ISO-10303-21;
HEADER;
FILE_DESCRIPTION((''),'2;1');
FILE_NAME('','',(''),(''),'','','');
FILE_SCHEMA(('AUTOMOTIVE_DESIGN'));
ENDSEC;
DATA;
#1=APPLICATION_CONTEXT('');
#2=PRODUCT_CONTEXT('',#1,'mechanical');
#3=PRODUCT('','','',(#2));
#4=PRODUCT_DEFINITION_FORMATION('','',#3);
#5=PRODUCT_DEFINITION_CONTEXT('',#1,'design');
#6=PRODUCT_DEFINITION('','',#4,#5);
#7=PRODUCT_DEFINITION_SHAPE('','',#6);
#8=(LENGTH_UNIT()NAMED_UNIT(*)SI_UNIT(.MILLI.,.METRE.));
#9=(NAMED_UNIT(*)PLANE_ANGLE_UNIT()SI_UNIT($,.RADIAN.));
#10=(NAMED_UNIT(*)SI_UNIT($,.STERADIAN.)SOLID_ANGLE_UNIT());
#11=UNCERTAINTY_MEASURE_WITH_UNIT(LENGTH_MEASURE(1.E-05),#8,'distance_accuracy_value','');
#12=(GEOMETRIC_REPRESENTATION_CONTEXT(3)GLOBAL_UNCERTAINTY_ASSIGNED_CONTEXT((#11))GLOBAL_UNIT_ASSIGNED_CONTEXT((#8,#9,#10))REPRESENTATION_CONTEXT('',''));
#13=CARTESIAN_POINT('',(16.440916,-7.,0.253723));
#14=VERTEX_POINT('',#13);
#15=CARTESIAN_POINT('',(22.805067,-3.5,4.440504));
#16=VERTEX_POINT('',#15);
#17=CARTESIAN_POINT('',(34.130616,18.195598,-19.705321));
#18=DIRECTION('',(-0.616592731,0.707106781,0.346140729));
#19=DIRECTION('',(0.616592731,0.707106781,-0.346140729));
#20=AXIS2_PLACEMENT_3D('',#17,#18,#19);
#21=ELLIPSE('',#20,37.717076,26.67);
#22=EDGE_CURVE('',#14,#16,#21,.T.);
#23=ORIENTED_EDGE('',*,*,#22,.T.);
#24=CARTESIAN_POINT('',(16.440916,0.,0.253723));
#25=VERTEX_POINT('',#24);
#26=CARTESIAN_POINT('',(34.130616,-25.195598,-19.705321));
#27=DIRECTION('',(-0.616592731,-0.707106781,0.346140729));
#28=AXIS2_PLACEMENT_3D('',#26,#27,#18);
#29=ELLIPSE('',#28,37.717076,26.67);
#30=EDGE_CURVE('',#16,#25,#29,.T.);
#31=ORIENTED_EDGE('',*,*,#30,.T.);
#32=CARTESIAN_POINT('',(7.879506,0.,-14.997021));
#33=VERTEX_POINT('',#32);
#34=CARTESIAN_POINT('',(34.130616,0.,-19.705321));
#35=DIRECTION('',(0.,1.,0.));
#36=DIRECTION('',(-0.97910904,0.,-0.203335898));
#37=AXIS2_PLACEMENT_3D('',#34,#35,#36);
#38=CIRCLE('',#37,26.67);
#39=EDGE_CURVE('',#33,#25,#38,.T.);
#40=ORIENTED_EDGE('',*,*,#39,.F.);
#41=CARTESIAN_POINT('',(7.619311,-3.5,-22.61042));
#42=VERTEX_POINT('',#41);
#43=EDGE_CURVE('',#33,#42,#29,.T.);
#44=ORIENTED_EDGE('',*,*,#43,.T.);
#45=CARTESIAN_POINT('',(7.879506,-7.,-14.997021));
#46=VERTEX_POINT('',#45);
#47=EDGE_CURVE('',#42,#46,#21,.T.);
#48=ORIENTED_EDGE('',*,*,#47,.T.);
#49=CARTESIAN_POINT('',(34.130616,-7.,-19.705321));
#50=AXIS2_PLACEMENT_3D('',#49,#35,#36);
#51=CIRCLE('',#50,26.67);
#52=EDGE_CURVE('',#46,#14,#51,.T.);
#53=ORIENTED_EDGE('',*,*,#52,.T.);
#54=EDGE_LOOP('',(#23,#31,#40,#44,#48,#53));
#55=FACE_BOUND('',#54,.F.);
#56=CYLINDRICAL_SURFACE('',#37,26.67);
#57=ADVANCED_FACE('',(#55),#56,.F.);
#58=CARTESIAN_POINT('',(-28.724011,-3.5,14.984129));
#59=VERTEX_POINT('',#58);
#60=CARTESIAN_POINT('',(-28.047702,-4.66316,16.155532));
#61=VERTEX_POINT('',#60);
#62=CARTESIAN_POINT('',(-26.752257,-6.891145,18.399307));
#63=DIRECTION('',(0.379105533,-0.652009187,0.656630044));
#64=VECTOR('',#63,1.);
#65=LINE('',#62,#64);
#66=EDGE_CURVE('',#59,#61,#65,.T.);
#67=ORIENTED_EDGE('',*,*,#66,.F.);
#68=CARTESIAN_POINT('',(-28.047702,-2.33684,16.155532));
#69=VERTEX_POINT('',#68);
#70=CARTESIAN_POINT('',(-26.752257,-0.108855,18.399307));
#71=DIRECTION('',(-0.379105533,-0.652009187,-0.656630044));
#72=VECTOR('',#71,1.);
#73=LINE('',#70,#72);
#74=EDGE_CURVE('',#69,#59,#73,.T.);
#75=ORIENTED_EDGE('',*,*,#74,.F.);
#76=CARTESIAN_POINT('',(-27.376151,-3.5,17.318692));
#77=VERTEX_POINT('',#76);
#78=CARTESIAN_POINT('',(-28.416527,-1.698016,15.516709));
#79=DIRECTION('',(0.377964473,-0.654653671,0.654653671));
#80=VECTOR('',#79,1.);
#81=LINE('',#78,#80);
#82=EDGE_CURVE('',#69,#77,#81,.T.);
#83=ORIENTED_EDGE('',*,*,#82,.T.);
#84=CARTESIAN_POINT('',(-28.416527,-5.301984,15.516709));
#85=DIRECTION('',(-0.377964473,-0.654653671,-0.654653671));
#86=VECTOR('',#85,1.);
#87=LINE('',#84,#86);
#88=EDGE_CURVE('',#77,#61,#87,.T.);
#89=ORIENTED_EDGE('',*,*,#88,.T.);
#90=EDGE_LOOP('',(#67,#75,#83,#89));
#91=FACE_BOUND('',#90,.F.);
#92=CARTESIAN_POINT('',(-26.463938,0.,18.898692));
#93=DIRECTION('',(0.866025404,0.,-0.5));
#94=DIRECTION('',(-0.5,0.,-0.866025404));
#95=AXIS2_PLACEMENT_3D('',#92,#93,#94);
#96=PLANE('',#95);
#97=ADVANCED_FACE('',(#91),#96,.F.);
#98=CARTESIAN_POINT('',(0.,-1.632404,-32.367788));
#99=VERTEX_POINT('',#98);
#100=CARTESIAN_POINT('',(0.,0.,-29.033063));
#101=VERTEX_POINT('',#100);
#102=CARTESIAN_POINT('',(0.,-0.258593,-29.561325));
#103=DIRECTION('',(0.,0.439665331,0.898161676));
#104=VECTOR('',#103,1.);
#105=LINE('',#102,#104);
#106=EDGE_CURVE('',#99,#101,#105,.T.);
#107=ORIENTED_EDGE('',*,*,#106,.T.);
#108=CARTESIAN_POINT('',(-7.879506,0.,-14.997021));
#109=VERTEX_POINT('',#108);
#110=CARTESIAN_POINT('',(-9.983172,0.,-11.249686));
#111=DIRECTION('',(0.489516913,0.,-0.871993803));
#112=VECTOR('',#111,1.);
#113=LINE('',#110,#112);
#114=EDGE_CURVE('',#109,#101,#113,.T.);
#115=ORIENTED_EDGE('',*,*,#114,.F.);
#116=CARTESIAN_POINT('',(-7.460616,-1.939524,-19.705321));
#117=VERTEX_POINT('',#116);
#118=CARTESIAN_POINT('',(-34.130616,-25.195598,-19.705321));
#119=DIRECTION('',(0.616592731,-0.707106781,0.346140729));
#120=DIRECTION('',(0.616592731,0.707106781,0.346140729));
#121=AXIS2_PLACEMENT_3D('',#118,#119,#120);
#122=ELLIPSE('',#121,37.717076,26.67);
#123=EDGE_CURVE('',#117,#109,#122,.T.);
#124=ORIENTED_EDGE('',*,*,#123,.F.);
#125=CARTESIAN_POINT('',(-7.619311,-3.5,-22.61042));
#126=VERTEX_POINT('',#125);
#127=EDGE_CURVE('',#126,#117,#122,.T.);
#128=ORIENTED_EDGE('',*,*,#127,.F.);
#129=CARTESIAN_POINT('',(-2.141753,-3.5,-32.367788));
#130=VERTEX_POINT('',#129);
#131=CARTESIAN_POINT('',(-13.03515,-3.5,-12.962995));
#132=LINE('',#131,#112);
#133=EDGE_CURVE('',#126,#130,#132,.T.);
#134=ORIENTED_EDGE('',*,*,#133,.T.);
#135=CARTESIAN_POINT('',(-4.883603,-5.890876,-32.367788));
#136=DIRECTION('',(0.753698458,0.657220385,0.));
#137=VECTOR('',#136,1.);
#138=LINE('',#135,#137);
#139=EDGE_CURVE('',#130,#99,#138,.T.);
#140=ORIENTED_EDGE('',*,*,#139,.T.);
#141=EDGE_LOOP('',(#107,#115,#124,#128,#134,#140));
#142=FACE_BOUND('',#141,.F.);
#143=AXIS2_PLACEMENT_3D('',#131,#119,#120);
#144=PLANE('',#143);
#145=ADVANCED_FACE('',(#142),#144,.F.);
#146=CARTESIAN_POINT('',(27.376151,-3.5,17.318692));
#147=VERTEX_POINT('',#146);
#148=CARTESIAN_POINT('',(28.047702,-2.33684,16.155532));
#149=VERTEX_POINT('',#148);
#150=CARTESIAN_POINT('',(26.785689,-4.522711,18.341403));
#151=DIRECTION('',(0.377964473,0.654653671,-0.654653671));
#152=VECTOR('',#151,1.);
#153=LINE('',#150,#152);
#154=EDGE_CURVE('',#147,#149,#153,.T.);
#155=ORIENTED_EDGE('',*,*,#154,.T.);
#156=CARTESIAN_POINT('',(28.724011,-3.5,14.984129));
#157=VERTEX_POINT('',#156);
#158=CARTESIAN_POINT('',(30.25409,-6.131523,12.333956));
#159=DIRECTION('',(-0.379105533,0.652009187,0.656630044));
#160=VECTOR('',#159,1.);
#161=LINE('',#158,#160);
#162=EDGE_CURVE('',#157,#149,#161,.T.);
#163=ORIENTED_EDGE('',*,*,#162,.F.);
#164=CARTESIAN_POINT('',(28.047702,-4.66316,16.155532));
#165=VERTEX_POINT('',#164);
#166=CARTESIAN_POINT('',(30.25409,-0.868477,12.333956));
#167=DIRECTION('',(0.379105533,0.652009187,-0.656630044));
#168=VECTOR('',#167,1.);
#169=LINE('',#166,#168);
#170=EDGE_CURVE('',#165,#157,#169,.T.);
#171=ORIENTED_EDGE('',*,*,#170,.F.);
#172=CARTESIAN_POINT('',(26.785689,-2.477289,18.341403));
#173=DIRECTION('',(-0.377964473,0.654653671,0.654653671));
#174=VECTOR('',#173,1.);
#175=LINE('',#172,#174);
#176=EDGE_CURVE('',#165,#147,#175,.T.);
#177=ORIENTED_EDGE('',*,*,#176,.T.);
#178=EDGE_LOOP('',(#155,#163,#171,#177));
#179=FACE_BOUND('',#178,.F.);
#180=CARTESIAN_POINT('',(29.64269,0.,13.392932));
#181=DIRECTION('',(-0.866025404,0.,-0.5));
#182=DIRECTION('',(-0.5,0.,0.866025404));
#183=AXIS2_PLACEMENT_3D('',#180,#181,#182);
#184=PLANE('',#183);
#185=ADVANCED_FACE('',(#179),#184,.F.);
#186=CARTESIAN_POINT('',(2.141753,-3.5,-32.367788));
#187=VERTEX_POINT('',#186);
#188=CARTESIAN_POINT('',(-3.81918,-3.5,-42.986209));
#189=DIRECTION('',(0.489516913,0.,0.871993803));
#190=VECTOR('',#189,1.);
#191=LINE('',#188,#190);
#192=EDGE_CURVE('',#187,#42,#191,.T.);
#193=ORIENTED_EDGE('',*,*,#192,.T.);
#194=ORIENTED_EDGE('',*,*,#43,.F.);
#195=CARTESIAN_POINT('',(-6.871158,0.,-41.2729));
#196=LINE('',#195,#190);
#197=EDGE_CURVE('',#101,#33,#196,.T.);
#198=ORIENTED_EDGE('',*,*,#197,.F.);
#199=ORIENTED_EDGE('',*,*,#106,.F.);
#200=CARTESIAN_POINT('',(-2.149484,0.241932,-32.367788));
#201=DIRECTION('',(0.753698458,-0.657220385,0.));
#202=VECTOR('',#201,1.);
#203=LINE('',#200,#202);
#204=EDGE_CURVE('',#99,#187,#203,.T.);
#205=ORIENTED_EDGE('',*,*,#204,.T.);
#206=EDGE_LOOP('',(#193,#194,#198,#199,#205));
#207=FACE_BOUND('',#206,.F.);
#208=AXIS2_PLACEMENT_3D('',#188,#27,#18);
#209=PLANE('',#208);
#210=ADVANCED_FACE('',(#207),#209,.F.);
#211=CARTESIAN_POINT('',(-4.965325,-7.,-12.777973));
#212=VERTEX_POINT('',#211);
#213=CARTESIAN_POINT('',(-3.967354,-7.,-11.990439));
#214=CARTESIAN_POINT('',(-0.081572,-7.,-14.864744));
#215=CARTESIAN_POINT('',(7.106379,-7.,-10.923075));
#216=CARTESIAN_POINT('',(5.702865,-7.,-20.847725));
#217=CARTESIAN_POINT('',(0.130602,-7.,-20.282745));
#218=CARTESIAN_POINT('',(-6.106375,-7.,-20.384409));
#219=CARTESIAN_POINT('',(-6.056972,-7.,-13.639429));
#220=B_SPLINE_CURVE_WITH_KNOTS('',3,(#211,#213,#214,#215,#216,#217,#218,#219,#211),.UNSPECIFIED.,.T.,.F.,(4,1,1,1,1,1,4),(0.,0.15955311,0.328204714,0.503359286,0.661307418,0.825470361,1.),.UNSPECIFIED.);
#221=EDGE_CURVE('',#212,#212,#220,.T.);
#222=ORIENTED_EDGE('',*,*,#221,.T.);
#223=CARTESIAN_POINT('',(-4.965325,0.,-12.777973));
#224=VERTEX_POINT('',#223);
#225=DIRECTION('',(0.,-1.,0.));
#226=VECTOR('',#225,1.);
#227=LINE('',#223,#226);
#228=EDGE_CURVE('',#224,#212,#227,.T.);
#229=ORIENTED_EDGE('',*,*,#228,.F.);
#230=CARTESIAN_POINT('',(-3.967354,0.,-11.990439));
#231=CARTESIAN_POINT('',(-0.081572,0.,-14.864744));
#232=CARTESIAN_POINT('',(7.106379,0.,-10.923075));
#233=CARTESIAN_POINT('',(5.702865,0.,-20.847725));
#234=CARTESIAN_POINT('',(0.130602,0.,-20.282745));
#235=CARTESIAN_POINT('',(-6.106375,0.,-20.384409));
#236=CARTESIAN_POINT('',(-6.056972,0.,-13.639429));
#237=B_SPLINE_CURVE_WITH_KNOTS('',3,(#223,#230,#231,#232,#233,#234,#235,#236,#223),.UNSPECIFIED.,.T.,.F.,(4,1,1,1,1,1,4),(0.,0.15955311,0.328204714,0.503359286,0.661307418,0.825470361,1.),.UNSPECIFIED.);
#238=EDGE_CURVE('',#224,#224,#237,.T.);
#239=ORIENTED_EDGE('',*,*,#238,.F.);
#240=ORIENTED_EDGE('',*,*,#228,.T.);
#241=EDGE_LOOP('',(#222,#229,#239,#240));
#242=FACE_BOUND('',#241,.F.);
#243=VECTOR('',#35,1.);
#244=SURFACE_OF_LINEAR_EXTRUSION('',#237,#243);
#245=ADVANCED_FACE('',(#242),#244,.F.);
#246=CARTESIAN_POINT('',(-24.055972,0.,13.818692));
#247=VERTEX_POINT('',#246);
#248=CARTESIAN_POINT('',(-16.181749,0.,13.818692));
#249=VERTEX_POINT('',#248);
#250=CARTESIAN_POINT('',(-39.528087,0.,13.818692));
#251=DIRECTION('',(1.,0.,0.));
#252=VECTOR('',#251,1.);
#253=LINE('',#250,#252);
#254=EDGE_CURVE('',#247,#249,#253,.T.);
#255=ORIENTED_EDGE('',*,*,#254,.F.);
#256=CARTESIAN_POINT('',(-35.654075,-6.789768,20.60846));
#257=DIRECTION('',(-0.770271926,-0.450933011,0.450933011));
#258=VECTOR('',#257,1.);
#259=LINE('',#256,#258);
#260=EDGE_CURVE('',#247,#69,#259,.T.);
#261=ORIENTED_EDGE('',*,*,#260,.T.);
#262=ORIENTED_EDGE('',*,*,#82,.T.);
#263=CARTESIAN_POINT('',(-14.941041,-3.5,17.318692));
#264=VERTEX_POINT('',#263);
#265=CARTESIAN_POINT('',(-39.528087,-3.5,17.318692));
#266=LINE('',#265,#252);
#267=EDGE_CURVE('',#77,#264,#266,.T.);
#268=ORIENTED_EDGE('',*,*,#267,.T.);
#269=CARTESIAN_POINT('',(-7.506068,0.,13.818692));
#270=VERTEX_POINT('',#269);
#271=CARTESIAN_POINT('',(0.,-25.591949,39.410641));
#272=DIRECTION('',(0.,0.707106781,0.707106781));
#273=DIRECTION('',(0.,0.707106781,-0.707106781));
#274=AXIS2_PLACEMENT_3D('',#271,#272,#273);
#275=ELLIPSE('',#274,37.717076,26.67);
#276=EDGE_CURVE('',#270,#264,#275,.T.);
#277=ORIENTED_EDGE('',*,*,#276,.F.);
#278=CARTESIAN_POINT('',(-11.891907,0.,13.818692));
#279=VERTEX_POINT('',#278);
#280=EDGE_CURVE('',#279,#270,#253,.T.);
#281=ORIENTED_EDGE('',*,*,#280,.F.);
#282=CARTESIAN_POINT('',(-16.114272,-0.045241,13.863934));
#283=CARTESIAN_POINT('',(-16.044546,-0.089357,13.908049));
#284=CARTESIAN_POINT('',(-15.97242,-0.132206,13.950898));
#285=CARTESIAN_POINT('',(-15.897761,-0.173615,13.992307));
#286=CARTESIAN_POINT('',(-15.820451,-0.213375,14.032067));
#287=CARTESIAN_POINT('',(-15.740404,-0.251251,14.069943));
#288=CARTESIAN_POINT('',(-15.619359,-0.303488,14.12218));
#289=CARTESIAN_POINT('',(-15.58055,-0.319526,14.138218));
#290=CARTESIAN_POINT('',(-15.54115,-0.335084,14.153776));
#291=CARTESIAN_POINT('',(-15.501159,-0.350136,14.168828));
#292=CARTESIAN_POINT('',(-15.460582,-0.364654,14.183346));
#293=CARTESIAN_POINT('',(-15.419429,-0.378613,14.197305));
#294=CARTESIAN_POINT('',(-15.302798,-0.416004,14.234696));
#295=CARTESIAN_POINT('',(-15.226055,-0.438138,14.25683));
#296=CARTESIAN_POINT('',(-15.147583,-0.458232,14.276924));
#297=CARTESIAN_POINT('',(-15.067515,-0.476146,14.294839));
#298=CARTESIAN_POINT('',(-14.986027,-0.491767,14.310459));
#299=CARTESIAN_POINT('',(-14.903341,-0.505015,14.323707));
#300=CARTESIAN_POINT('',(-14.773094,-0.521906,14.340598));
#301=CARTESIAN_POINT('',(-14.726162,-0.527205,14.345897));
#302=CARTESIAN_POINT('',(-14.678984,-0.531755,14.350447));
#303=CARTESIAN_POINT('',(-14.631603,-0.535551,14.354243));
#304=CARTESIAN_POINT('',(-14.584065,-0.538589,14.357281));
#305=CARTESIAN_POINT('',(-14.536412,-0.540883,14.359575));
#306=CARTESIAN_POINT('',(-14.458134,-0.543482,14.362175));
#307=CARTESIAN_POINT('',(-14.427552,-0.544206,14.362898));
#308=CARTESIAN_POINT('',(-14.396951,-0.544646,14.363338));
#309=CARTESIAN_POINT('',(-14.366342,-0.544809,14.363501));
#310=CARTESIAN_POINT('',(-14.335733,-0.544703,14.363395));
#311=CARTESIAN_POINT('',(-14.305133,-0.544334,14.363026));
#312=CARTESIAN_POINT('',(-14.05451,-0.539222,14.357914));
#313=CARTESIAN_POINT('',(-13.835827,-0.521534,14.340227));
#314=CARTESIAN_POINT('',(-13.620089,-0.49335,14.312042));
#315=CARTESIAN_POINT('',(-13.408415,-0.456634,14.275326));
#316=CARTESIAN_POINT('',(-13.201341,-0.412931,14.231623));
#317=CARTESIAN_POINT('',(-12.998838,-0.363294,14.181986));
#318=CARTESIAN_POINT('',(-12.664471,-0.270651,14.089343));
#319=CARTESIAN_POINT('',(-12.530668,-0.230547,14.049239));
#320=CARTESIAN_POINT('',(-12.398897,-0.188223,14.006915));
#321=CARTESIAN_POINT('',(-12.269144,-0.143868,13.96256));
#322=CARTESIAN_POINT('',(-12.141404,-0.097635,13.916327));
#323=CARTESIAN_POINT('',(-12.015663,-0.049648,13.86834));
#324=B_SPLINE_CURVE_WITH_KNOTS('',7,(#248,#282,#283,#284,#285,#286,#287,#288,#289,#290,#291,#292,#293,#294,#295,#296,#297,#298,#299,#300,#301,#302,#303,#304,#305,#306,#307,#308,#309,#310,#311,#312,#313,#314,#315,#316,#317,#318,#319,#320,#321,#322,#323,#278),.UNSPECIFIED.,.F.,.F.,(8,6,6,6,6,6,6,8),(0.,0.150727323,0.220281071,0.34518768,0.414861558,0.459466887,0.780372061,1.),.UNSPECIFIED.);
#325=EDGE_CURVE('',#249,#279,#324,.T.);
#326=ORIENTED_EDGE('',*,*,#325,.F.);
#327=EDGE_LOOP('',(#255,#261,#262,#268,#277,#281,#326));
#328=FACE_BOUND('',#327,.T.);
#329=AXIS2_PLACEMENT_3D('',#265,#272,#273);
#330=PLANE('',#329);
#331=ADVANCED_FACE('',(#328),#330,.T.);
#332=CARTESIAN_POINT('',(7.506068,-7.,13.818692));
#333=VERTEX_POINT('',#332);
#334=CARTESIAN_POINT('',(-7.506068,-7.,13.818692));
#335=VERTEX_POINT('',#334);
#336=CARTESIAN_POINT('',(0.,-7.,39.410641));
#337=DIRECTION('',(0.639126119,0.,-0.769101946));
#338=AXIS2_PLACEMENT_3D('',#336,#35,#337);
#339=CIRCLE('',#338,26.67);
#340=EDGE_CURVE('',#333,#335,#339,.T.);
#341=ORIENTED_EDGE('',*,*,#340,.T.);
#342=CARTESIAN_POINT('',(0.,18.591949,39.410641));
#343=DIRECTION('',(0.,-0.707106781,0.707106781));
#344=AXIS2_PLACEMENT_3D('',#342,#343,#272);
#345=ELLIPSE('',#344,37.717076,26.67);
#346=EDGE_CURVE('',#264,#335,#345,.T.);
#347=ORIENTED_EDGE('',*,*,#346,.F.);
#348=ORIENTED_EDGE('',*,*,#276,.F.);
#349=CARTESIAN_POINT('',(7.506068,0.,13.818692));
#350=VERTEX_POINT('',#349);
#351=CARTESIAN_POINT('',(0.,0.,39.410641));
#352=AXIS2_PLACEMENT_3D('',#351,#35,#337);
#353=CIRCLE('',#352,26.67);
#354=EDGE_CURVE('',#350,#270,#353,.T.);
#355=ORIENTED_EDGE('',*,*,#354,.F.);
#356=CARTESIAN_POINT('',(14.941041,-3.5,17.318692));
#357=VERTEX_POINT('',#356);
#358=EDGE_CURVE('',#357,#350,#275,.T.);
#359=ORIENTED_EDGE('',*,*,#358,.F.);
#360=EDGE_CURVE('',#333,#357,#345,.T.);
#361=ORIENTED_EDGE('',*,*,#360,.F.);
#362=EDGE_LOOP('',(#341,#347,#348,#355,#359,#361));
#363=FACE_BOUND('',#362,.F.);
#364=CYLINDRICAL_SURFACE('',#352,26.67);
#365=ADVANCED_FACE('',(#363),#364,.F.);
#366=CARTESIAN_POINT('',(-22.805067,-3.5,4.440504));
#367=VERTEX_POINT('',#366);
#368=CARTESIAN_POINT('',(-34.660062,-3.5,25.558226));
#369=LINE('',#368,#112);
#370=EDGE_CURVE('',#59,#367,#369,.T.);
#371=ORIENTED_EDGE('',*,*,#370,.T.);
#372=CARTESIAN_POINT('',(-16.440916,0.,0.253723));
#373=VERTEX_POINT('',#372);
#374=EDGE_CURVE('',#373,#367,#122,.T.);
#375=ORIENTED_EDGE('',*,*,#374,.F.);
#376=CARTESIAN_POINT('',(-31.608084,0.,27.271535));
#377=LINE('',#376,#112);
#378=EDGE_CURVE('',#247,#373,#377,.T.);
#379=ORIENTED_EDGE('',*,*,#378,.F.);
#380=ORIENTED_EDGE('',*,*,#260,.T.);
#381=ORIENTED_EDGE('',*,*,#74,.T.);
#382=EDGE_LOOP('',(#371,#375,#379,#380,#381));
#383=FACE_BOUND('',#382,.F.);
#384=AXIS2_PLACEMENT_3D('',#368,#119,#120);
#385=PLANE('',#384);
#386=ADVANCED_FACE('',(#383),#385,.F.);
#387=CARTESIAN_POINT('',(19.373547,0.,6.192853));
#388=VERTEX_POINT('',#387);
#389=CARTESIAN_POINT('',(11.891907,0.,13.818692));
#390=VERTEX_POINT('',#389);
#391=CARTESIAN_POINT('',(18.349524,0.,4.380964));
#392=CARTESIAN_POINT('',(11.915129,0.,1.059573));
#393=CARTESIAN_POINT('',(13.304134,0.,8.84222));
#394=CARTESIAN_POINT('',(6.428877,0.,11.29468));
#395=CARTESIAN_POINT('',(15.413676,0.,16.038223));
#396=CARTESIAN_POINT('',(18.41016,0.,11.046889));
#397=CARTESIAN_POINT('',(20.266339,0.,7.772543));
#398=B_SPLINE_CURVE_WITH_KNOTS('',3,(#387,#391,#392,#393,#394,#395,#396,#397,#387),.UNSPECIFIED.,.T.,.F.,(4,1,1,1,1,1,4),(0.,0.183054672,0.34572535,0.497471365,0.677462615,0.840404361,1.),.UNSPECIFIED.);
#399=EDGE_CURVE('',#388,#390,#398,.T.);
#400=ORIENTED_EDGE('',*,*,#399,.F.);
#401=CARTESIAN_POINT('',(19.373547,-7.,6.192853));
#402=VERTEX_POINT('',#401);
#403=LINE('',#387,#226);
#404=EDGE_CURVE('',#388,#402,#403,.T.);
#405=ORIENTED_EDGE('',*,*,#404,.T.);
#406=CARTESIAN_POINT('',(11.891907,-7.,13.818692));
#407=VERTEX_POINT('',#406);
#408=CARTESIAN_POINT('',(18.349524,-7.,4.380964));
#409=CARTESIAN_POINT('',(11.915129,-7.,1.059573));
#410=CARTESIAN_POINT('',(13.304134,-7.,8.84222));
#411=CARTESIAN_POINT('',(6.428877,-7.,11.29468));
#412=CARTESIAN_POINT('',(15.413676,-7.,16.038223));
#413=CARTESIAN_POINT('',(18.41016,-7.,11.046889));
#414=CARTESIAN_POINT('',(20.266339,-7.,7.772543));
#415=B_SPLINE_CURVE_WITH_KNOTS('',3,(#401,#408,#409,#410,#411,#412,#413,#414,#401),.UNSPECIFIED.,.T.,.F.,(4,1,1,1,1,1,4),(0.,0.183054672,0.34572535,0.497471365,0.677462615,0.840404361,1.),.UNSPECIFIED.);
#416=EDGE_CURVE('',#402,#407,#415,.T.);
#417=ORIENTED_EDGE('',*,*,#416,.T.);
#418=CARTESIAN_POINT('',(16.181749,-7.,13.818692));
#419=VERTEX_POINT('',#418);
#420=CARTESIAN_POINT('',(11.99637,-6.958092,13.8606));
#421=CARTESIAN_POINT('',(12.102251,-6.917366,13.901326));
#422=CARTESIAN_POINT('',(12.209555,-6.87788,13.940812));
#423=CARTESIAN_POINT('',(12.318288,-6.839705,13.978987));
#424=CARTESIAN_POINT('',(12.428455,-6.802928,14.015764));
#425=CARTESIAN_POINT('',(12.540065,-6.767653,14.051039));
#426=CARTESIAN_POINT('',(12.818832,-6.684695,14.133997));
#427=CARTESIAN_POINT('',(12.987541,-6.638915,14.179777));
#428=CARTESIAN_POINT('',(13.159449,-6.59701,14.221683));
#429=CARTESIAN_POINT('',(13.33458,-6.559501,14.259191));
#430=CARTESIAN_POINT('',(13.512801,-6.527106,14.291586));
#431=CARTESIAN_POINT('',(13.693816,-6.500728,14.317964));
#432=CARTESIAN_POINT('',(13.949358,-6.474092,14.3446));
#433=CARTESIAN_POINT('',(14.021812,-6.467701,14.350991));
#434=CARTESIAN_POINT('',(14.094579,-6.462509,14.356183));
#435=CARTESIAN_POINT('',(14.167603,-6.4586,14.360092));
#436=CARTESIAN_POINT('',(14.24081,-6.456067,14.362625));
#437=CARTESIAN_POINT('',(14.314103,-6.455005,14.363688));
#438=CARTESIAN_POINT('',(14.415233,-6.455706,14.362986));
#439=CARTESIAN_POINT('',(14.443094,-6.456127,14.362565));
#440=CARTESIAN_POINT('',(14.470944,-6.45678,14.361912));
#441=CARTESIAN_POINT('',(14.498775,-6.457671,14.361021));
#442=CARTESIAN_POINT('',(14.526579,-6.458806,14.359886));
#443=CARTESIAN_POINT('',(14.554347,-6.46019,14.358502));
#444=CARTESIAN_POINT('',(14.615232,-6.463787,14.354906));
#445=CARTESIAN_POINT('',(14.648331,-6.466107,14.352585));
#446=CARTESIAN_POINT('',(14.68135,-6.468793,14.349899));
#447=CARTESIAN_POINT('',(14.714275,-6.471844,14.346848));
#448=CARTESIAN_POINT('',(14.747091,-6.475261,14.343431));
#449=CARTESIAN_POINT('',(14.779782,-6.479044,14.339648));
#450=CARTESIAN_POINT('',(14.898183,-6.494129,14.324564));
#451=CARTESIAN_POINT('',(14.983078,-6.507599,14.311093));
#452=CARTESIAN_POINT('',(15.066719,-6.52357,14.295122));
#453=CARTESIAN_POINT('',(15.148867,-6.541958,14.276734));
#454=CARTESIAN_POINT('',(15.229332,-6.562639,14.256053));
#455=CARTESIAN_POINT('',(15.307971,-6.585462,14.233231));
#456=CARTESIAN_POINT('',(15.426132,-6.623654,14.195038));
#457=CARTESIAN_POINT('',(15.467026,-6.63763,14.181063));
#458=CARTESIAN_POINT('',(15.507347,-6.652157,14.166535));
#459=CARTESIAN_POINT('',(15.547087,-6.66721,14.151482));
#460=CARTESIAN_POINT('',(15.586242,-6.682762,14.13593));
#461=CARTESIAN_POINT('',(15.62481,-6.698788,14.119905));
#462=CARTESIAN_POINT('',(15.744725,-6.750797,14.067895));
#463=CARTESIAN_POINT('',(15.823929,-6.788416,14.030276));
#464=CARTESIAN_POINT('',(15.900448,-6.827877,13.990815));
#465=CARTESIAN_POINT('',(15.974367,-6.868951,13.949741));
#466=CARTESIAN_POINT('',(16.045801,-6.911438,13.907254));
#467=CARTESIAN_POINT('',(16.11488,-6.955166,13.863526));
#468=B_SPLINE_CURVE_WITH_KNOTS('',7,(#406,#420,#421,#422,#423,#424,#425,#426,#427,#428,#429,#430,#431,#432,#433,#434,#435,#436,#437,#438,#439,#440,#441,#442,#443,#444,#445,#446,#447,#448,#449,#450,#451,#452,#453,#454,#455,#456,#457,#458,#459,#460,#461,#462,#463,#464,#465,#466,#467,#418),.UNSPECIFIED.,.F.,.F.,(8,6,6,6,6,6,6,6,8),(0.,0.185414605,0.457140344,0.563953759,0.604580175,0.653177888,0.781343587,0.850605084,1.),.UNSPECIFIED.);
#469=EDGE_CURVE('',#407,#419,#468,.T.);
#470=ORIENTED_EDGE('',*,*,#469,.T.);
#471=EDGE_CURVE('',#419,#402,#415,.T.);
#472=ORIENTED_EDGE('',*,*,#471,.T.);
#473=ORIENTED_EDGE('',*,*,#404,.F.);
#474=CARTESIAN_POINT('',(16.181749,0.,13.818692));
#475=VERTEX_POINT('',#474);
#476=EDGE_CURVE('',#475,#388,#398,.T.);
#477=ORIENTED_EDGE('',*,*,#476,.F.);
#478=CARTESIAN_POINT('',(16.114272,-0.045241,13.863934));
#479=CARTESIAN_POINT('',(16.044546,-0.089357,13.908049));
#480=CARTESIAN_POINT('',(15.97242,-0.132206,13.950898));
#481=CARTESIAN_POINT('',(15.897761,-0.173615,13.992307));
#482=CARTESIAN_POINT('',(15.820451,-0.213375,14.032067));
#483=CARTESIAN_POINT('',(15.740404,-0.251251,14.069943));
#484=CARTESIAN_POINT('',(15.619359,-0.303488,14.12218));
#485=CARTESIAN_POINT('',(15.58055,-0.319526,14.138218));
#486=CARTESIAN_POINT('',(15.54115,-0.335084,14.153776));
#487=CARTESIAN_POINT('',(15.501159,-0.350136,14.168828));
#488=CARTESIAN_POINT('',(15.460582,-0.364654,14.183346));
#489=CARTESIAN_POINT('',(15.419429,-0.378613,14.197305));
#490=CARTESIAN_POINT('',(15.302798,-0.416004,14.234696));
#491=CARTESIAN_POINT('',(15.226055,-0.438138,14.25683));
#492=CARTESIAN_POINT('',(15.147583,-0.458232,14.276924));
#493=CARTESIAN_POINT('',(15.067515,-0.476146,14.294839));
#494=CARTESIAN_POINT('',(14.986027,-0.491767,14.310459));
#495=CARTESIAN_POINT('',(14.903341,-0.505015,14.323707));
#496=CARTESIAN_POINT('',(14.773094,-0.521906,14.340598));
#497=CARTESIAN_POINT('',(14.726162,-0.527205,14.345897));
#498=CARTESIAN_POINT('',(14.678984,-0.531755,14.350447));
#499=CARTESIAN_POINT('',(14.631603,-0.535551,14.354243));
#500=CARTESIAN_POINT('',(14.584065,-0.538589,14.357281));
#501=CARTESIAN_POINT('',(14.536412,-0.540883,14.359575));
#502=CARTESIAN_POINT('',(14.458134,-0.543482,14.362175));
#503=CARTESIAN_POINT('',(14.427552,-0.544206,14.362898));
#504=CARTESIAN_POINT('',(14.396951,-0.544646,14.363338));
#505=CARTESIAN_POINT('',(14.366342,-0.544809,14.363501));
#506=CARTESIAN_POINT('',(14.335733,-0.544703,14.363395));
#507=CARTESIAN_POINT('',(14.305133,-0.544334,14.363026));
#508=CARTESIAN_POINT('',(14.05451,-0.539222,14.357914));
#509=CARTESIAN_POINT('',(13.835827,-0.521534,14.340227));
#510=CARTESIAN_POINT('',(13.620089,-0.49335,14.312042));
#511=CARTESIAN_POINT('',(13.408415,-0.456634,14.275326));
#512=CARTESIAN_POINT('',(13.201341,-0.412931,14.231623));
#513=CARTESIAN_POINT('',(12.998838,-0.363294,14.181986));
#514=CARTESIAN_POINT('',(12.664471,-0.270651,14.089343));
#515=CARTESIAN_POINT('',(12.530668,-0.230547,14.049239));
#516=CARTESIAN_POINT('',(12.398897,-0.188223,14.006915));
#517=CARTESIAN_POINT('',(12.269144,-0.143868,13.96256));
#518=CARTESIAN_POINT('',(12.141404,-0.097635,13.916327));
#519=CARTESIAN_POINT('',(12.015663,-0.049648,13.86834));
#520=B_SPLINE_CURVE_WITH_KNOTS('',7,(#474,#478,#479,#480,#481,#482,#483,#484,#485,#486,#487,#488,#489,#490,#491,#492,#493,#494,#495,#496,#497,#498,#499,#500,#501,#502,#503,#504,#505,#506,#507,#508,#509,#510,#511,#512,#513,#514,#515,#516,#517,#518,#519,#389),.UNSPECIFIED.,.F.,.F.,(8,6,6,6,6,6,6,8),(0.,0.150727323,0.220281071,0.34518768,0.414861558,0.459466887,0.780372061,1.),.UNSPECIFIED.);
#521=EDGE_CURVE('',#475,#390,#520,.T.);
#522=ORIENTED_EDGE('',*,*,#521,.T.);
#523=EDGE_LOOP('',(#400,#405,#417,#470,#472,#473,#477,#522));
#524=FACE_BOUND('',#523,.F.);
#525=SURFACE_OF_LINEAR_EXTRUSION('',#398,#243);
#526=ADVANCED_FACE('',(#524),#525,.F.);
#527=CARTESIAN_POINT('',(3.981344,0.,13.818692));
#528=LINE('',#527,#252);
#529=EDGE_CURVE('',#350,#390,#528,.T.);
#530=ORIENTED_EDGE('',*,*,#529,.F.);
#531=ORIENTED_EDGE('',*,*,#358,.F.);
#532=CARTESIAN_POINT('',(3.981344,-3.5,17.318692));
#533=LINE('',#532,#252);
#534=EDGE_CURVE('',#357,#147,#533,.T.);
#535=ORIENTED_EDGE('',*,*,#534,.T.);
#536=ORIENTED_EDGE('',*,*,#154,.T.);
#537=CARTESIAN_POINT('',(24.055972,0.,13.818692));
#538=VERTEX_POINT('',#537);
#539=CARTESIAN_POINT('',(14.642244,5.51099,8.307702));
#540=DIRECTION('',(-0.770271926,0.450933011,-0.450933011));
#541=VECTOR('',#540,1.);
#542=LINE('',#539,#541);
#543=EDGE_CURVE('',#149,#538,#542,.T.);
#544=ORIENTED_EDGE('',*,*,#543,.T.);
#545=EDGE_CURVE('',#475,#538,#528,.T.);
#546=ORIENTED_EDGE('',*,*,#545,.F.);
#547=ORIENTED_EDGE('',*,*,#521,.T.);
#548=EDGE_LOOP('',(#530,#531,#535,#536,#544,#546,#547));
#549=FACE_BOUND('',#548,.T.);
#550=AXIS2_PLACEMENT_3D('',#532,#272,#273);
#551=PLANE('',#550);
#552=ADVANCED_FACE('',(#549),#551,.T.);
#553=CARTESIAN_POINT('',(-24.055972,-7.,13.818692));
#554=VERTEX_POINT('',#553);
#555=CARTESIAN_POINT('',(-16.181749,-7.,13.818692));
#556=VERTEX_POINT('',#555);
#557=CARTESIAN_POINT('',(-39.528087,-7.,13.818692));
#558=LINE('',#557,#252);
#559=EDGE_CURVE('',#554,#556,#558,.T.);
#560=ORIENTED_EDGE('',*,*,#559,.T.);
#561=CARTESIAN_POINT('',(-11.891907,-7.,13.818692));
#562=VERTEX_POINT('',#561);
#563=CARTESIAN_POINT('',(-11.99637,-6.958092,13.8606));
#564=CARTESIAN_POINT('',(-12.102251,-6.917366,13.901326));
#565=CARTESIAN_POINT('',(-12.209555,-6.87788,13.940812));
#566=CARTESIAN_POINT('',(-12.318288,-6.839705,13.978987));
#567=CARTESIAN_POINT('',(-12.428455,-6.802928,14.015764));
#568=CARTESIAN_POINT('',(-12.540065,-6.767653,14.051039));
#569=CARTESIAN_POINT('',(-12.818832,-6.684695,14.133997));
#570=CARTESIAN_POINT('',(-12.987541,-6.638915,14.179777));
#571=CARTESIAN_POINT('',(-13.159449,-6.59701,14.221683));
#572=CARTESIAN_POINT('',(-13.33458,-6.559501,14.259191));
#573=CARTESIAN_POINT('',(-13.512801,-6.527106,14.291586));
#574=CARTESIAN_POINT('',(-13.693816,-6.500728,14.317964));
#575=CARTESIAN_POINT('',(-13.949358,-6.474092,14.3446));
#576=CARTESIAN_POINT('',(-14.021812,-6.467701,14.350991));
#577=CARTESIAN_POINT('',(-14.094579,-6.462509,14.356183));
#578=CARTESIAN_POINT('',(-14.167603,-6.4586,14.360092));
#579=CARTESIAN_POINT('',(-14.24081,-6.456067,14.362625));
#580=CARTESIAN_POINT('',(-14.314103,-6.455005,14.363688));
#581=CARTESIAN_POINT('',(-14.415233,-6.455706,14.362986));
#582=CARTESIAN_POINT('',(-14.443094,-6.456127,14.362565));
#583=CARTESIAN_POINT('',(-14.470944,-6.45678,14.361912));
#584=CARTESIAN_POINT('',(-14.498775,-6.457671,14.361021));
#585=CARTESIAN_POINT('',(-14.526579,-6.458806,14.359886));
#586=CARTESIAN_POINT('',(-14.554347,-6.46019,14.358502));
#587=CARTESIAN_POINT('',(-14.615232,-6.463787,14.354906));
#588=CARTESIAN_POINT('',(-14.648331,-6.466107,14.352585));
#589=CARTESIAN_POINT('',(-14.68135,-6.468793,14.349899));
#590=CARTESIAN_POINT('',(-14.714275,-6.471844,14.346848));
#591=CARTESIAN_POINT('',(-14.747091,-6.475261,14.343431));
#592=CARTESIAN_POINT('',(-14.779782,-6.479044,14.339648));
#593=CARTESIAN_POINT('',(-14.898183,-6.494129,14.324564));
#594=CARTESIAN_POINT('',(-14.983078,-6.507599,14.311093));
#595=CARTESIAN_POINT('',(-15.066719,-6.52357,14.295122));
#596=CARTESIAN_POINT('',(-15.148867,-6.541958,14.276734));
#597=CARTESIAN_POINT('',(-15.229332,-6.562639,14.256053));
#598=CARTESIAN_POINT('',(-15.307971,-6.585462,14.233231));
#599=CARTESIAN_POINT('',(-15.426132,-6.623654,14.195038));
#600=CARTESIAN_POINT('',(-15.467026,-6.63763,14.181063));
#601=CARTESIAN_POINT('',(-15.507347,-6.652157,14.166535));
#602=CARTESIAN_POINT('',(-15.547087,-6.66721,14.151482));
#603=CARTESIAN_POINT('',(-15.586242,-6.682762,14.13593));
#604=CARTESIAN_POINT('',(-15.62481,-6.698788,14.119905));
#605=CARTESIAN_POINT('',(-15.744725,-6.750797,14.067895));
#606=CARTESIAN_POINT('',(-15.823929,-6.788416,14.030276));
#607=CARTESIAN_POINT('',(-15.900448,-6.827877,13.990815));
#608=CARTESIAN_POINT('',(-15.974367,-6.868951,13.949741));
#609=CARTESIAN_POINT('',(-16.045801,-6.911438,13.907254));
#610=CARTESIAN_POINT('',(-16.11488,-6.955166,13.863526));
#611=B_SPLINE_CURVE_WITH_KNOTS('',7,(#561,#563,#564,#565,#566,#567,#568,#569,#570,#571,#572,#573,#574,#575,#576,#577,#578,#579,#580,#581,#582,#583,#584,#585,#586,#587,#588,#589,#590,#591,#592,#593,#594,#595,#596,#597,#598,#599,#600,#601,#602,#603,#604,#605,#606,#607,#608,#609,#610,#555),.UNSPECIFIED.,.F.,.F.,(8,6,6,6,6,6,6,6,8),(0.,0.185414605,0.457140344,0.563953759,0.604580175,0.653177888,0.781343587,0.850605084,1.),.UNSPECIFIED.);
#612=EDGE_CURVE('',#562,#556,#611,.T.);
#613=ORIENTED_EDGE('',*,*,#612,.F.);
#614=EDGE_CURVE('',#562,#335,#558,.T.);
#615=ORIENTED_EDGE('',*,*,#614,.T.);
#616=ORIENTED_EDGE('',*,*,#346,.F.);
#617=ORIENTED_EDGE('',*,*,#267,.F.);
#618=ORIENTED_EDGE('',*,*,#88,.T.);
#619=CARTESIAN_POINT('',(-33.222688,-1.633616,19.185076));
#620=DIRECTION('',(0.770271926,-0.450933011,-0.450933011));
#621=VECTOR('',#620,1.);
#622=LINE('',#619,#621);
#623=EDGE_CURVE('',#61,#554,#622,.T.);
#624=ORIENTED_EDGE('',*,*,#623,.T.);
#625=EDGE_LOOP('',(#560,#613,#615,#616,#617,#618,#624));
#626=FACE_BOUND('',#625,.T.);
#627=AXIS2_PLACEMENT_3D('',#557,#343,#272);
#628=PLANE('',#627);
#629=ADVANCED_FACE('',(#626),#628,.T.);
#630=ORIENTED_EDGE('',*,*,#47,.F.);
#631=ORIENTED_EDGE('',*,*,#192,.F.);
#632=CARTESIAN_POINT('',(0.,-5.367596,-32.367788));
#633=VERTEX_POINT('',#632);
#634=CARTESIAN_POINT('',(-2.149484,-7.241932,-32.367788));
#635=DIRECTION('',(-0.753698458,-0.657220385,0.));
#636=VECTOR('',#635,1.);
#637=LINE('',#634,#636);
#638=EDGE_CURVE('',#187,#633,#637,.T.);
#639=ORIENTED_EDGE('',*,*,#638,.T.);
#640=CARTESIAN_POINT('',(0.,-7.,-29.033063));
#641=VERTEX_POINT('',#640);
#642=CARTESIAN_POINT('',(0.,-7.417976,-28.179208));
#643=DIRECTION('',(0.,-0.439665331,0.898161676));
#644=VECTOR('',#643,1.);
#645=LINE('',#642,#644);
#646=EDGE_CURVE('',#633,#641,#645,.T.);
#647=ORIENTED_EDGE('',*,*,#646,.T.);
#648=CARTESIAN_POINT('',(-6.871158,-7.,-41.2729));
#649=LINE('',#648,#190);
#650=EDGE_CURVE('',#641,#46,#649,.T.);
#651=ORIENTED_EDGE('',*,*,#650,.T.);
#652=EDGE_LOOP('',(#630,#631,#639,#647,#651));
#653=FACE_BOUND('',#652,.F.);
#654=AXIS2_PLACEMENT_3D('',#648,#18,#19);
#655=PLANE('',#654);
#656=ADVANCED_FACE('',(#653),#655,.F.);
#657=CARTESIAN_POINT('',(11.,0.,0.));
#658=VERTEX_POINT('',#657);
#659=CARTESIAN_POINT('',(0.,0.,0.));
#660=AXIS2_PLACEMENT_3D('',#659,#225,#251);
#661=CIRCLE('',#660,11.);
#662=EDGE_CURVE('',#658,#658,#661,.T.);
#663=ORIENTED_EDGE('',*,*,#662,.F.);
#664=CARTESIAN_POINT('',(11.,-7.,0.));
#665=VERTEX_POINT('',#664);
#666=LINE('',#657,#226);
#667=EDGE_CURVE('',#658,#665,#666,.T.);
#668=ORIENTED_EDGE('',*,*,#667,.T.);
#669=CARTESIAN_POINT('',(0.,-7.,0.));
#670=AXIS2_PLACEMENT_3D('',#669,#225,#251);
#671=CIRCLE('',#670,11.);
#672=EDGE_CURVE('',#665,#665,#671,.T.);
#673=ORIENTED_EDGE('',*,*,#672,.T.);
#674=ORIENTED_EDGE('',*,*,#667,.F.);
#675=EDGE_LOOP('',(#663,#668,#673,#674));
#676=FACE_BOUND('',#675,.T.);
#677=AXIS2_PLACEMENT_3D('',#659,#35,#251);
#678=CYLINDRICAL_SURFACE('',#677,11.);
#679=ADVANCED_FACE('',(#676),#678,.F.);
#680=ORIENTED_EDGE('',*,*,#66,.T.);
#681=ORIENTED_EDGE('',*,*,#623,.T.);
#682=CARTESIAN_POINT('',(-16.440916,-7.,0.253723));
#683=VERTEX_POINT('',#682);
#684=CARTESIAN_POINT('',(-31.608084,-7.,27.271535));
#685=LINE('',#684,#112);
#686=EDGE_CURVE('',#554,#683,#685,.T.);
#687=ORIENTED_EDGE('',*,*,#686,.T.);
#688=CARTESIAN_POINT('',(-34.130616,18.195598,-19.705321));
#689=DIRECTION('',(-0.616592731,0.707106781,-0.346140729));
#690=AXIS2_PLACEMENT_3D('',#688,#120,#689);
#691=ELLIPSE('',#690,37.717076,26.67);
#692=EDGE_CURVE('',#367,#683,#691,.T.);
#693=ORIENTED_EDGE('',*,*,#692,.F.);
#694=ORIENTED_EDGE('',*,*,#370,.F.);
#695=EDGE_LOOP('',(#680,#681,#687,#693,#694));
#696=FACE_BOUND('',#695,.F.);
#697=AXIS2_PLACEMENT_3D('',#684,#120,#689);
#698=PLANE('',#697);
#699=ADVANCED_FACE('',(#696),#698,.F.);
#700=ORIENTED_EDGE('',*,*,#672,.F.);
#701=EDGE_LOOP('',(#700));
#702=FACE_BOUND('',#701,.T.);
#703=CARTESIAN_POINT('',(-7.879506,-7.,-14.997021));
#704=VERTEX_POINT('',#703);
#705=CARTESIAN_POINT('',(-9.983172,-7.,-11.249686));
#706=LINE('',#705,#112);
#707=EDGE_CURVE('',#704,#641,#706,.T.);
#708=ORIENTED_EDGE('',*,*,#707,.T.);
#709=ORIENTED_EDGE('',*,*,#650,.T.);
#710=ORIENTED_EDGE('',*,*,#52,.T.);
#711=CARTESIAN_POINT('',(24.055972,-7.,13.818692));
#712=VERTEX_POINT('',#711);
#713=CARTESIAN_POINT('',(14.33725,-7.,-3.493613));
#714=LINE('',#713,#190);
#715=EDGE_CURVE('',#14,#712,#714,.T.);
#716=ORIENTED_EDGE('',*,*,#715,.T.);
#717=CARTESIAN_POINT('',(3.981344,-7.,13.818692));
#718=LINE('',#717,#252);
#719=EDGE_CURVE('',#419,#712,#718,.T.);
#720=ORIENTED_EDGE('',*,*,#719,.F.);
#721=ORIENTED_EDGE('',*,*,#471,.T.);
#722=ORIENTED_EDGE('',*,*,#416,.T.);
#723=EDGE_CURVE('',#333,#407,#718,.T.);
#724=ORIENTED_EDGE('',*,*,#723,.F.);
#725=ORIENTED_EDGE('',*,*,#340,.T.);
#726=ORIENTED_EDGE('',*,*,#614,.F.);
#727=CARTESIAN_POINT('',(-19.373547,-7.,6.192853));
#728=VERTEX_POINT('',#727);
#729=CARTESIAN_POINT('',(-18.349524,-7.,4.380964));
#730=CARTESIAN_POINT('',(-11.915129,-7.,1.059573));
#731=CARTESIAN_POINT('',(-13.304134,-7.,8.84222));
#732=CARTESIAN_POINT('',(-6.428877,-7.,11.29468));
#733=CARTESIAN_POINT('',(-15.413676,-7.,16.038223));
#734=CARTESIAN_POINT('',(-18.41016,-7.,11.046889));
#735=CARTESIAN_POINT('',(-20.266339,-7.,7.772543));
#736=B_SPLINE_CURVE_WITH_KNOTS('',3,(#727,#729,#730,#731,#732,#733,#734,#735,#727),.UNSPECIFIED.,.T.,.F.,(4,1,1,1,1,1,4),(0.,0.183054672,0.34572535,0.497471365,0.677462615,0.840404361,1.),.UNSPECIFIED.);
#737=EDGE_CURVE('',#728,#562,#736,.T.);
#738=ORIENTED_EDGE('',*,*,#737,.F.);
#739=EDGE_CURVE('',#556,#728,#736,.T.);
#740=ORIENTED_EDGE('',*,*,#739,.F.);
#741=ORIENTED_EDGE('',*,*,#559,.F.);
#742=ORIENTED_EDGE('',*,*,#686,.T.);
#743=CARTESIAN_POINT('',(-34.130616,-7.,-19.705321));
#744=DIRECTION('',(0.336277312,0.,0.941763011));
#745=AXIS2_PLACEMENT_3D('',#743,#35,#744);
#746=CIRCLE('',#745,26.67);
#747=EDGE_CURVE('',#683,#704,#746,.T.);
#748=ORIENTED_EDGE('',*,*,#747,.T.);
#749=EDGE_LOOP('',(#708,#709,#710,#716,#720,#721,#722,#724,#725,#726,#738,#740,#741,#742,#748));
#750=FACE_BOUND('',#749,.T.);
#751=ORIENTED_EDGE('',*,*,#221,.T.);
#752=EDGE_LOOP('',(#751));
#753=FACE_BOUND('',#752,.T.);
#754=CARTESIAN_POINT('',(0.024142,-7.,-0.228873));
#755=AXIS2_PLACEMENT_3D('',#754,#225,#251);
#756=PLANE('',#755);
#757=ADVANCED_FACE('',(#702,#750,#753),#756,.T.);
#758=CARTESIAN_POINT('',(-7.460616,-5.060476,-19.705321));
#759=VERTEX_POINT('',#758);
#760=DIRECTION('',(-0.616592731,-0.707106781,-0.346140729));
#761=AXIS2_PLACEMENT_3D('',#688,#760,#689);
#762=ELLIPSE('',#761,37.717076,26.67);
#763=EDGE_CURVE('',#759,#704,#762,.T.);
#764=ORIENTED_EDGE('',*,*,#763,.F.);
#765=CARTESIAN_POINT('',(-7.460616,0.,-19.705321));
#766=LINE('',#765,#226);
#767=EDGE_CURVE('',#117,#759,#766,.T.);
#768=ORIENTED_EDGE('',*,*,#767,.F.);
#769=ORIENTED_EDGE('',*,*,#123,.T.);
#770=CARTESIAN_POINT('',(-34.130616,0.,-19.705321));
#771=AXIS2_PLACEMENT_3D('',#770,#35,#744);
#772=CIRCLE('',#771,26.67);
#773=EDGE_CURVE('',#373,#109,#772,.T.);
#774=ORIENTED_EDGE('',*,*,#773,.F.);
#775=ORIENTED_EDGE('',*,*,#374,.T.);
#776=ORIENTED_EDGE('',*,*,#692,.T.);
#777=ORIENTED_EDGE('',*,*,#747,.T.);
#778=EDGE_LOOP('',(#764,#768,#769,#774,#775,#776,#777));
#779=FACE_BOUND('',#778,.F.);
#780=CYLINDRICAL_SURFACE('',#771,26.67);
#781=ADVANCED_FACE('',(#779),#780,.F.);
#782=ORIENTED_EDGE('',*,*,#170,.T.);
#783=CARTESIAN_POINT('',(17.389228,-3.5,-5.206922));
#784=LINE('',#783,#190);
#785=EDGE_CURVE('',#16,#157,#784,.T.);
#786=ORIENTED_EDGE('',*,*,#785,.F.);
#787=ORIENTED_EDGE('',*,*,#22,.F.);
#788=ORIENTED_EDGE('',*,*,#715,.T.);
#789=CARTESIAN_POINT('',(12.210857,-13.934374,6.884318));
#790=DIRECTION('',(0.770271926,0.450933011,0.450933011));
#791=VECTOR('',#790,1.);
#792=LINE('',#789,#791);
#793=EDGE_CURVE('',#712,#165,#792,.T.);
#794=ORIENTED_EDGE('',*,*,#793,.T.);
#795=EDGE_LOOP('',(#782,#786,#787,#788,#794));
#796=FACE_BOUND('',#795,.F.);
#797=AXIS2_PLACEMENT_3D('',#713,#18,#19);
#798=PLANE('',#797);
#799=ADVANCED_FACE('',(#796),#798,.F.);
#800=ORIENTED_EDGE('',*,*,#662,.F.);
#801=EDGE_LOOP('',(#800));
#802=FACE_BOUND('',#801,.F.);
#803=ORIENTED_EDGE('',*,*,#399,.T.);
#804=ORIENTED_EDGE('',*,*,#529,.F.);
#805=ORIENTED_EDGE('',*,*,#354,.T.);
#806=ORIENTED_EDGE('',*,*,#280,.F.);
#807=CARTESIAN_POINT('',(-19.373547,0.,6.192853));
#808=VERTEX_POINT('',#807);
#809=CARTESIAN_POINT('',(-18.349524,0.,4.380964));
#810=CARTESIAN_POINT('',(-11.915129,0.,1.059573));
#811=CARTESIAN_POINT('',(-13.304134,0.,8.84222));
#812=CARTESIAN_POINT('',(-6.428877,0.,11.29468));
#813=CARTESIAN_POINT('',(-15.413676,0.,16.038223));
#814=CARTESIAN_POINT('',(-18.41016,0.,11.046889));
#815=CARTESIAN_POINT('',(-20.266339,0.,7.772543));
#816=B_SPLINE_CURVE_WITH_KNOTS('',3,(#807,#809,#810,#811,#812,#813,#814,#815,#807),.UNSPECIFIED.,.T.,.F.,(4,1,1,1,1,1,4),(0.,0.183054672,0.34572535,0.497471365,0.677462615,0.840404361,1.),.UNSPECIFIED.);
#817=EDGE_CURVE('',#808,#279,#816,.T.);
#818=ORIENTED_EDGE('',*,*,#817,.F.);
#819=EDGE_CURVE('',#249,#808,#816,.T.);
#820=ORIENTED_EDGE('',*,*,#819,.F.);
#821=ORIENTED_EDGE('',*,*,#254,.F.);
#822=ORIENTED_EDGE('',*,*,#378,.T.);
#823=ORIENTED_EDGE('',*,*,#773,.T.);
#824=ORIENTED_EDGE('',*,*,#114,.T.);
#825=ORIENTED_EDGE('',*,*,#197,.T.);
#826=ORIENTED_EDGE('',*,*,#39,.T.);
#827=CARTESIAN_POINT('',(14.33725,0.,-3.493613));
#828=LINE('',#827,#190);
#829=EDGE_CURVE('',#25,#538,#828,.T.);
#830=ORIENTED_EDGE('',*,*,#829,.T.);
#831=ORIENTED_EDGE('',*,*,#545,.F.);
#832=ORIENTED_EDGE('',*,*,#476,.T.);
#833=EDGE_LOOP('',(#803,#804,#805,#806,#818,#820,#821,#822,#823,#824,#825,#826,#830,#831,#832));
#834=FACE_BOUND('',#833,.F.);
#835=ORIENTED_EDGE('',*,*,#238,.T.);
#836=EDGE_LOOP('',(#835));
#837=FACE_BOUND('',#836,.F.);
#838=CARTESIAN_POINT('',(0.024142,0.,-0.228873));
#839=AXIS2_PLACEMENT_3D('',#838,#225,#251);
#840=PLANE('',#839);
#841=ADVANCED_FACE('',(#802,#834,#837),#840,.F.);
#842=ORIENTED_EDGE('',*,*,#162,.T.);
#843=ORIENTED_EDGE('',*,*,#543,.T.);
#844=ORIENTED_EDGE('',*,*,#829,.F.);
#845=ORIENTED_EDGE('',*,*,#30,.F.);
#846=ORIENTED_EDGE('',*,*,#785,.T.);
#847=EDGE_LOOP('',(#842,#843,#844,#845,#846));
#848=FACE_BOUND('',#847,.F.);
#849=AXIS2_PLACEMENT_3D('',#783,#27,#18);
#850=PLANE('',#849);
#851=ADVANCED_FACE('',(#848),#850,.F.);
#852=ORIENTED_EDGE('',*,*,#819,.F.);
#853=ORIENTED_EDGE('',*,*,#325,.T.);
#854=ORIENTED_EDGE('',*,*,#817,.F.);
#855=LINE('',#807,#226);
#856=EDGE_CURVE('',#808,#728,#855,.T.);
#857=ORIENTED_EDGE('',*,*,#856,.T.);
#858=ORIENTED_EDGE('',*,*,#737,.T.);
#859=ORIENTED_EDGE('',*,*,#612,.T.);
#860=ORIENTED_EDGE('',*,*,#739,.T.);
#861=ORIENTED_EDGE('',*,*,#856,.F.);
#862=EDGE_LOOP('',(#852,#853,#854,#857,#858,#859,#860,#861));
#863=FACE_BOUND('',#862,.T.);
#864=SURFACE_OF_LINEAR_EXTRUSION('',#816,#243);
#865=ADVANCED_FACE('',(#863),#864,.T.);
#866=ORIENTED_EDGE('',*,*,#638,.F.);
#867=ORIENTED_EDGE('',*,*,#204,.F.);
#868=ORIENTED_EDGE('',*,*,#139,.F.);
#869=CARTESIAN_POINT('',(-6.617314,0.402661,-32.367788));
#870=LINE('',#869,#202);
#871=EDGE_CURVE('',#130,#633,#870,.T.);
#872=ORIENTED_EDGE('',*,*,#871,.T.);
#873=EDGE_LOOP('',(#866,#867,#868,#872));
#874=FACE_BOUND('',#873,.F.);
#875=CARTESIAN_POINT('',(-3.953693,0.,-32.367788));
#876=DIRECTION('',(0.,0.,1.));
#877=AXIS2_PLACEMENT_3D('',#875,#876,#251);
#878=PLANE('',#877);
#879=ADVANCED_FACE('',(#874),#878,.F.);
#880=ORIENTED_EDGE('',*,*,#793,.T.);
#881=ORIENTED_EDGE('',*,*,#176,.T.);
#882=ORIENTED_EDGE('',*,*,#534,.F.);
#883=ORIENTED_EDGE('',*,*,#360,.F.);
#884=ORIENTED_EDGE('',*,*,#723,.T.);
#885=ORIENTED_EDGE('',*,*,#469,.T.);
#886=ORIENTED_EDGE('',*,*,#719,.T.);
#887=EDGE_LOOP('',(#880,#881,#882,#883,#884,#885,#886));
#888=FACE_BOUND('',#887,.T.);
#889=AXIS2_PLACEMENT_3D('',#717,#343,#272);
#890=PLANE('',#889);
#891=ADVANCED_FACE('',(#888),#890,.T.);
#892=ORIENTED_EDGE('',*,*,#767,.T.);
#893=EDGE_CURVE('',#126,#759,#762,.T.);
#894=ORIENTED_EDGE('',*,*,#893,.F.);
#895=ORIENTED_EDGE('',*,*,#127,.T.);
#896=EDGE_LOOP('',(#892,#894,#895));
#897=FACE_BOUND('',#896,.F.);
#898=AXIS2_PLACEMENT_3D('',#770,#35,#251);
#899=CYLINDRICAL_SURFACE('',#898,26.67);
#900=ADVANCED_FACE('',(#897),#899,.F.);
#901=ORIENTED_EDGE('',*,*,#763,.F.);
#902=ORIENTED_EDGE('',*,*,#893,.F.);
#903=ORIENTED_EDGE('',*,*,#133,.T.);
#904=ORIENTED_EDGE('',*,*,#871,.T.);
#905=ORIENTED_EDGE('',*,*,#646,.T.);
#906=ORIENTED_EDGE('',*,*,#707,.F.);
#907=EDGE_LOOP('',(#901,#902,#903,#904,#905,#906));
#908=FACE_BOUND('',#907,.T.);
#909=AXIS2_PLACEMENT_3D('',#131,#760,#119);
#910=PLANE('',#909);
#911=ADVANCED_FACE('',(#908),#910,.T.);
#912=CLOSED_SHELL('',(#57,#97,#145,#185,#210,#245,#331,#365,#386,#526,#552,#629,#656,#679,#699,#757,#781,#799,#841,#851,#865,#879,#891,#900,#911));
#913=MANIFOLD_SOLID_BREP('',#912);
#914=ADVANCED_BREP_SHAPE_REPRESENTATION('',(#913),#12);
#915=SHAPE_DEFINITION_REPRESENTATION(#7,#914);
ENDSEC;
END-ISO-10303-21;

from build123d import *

# Parameters (mm, degrees)
F0_R         = 11
F1_DEPTH     = 7
F2_T1_DEPTH  = 35.2813832436
F2_T3_DEPTH  = 35.5467430765
F2_T5_DEPTH  = 34.4305362998
F2_T7_DEPTH  = 34.4305362998
F2_T9_DEPTH  = 35.2813832436
F2_T11_DEPTH = 35.5467430765


# Not quite as in the source:
# - a fillet or chamfer that OpenCascade refuses, or shapes differently, is made with other operations: its cross-section is extruded or revolved along the edge and cut away or added


with BuildPart() as f1:
    # F0 (on Front) → F1 (new body)
    with BuildSketch(Plane.XZ):
        with BuildLine():
            Line((-8.017778225, -25.1282889185), (-3.9536927291, -32.3677882552))
            Line((-3.9536927291, -32.3677882552), (3.9536927291, -32.3677882552))
            Line((3.9536927291, -32.3677882552), (8.017778225, -25.1282889185))
            ThreePointArc((8.017778225, -25.1282889185), (10.8745416094, -6.6499044579), (25.1621004057, 5.4114989824))
            Line((25.1621004057, 5.4114989824), (29.6426898708, 13.3929315811))
            Line((29.6426898708, 13.3929315811), (26.4639375252, 18.8986921484))
            Line((26.4639375252, 18.8986921484), (17.0454936065, 18.8986921484))
            ThreePointArc((17.0454936065, 18.8986921484), (0, 12.7406410493), (-17.0454936065, 18.8986921484))
            Line((-17.0454936065, 18.8986921484), (-26.4639375252, 18.8986921484))
            Line((-26.4639375252, 18.8986921484), (-29.6426898708, 13.3929315811))
            Line((-29.6426898708, 13.3929315811), (-25.1621004057, 5.4114989824))
            ThreePointArc((-25.1621004057, 5.4114989824), (-12.3306252771, -4.3414248541), (-7.4606163281, -19.7053205246))
            ThreePointArc((-7.4606163281, -19.7053205246), (-7.6002724535, -22.4310780148), (-8.017778225, -25.1282889185))
        make_face()
        Circle(F0_R, mode=Mode.SUBTRACT)
        with BuildLine():
            add(Edge.make_bspline(
                [(-19.3735472858, 6.192852743), (-18.3495240804, 4.3809635142), (-11.9151294961, 1.0595732713), (-13.3041344414, 8.8422203653), (-6.4288769454, 11.2946801857), (-15.4136761166, 16.0382229659), (-18.410160006, 11.0468887375), (-20.2663386903, 7.7725426571), (-19.3735472858, 6.192852743)],
                knots=[0, 0, 0, 0, 0.1830546722, 0.3457253498, 0.4974713646, 0.6774626151, 0.8404043609, 1, 1, 1, 1], degree=3))
        make_face(mode=Mode.SUBTRACT)
        with BuildLine():
            add(Edge.make_bspline(
                [(-4.9653253518, -12.7779729664), (-3.9673538813, -11.990438984), (-0.0815721197, -14.8647438543), (7.1063785889, -10.9230753891), (5.7028649477, -20.847724526), (0.130602412, -20.2827447937), (-6.1063753916, -20.3844092682), (-6.0569718905, -13.6394292017), (-4.9653253518, -12.7779729664)],
                knots=[0, 0, 0, 0, 0.1595531099, 0.3282047144, 0.5033592864, 0.6613074183, 0.8254703614, 1, 1, 1, 1], degree=3))
        make_face(mode=Mode.SUBTRACT)
        with BuildLine():
            add(Edge.make_bspline(
                [(19.3735472858, 6.192852743), (18.3495240804, 4.3809635142), (11.9151294961, 1.0595732713), (13.3041344414, 8.8422203653), (6.4288769454, 11.2946801857), (15.4136761166, 16.0382229659), (18.410160006, 11.0468887375), (20.2663386903, 7.7725426571), (19.3735472858, 6.192852743)],
                knots=[0, 0, 0, 0, 0.1830546722, 0.3457253498, 0.4974713646, 0.6774626151, 0.8404043609, 1, 1, 1, 1], degree=3))
        make_face(mode=Mode.SUBTRACT)
    extrude(amount=F1_DEPTH)

    # F2: chamfer of 5.08 on 12 edges, made by hand

    # F2_s2 → F2_t1 (cut)
    with BuildSketch(Plane(origin=(-19.2151547034, 0, 34.2286351679), x_dir=(0, 1, 0), z_dir=(0.4895169129, 0, -0.8719938027))):
        Polygon((-7, -14.2121753414), (-1.92, -19.2921753414), (-7, -19.2921753414), align=None)
        Polygon((-5.08, -19.2921753414), (0, -14.2121753414), (0, -19.2921753414), align=None)
    extrude(amount=F2_T1_DEPTH, mode=Mode.SUBTRACT)

    # F2_s4 → F2_t3 (cut)
    with BuildSketch(Plane.YZ.offset(-39.5280871041)):
        Polygon((-7, 13.8186921484), (-1.92, 18.8986921484), (-7, 18.8986921484), align=None)
        Polygon((-5.08, 18.8986921484), (0, 13.8186921484), (0, 18.8986921484), align=None)
    extrude(amount=F2_T3_DEPTH, mode=Mode.SUBTRACT)

    # F2_s6 → F2_t5 (cut)
    with BuildSketch(Plane(origin=(-19.2640867811, 0, -34.3157996098), x_dir=(0, 1, 0), z_dir=(0.4895169129, 0, 0.8719938027))):
        Polygon((-7, -14.2121753414), (-1.92, -19.2921753414), (-7, -19.2921753414), align=None)
        Polygon((-5.08, -19.2921753414), (0, -14.2121753414), (0, -19.2921753414), align=None)
    extrude(amount=F2_T5_DEPTH, mode=Mode.SUBTRACT)

    # F2_s8 → F2_t7 (cut)
    with BuildSketch(Plane(origin=(2.4097569425, 0, -4.2925853318), x_dir=(0, 1, 0), z_dir=(0.4895169129, 0, -0.8719938027))):
        Polygon((-1.92, -19.2921753414), (-7, -14.2121753414), (-7, -19.2921753414), align=None)
        Polygon((-5.08, -19.2921753414), (0, -14.2121753414), (0, -19.2921753414), align=None)
    extrude(amount=F2_T7_DEPTH, mode=Mode.SUBTRACT)

    # F2_s10 → F2_t9 (cut)
    with BuildSketch(Plane(origin=(1.9443208955, 0, 3.4634876278), x_dir=(0, 1, 0), z_dir=(0.4895169129, 0, 0.8719938027))):
        Polygon((-7, -14.2121753414), (-1.92, -19.2921753414), (-7, -19.2921753414), align=None)
        Polygon((-5.08, -19.2921753414), (0, -14.2121753414), (0, -19.2921753414), align=None)
    extrude(amount=F2_T9_DEPTH, mode=Mode.SUBTRACT)

    # F2_s12 → F2_t11 (cut)
    with BuildSketch(Plane.YZ.offset(3.9813440276)):
        Polygon((-7, 13.8186921484), (-1.92, 18.8986921484), (-7, 18.8986921484), align=None)
        Polygon((-5.08, 18.8986921484), (0, 13.8186921484), (0, 18.8986921484), align=None)
    extrude(amount=F2_T11_DEPTH, mode=Mode.SUBTRACT)


solid = f1.part
